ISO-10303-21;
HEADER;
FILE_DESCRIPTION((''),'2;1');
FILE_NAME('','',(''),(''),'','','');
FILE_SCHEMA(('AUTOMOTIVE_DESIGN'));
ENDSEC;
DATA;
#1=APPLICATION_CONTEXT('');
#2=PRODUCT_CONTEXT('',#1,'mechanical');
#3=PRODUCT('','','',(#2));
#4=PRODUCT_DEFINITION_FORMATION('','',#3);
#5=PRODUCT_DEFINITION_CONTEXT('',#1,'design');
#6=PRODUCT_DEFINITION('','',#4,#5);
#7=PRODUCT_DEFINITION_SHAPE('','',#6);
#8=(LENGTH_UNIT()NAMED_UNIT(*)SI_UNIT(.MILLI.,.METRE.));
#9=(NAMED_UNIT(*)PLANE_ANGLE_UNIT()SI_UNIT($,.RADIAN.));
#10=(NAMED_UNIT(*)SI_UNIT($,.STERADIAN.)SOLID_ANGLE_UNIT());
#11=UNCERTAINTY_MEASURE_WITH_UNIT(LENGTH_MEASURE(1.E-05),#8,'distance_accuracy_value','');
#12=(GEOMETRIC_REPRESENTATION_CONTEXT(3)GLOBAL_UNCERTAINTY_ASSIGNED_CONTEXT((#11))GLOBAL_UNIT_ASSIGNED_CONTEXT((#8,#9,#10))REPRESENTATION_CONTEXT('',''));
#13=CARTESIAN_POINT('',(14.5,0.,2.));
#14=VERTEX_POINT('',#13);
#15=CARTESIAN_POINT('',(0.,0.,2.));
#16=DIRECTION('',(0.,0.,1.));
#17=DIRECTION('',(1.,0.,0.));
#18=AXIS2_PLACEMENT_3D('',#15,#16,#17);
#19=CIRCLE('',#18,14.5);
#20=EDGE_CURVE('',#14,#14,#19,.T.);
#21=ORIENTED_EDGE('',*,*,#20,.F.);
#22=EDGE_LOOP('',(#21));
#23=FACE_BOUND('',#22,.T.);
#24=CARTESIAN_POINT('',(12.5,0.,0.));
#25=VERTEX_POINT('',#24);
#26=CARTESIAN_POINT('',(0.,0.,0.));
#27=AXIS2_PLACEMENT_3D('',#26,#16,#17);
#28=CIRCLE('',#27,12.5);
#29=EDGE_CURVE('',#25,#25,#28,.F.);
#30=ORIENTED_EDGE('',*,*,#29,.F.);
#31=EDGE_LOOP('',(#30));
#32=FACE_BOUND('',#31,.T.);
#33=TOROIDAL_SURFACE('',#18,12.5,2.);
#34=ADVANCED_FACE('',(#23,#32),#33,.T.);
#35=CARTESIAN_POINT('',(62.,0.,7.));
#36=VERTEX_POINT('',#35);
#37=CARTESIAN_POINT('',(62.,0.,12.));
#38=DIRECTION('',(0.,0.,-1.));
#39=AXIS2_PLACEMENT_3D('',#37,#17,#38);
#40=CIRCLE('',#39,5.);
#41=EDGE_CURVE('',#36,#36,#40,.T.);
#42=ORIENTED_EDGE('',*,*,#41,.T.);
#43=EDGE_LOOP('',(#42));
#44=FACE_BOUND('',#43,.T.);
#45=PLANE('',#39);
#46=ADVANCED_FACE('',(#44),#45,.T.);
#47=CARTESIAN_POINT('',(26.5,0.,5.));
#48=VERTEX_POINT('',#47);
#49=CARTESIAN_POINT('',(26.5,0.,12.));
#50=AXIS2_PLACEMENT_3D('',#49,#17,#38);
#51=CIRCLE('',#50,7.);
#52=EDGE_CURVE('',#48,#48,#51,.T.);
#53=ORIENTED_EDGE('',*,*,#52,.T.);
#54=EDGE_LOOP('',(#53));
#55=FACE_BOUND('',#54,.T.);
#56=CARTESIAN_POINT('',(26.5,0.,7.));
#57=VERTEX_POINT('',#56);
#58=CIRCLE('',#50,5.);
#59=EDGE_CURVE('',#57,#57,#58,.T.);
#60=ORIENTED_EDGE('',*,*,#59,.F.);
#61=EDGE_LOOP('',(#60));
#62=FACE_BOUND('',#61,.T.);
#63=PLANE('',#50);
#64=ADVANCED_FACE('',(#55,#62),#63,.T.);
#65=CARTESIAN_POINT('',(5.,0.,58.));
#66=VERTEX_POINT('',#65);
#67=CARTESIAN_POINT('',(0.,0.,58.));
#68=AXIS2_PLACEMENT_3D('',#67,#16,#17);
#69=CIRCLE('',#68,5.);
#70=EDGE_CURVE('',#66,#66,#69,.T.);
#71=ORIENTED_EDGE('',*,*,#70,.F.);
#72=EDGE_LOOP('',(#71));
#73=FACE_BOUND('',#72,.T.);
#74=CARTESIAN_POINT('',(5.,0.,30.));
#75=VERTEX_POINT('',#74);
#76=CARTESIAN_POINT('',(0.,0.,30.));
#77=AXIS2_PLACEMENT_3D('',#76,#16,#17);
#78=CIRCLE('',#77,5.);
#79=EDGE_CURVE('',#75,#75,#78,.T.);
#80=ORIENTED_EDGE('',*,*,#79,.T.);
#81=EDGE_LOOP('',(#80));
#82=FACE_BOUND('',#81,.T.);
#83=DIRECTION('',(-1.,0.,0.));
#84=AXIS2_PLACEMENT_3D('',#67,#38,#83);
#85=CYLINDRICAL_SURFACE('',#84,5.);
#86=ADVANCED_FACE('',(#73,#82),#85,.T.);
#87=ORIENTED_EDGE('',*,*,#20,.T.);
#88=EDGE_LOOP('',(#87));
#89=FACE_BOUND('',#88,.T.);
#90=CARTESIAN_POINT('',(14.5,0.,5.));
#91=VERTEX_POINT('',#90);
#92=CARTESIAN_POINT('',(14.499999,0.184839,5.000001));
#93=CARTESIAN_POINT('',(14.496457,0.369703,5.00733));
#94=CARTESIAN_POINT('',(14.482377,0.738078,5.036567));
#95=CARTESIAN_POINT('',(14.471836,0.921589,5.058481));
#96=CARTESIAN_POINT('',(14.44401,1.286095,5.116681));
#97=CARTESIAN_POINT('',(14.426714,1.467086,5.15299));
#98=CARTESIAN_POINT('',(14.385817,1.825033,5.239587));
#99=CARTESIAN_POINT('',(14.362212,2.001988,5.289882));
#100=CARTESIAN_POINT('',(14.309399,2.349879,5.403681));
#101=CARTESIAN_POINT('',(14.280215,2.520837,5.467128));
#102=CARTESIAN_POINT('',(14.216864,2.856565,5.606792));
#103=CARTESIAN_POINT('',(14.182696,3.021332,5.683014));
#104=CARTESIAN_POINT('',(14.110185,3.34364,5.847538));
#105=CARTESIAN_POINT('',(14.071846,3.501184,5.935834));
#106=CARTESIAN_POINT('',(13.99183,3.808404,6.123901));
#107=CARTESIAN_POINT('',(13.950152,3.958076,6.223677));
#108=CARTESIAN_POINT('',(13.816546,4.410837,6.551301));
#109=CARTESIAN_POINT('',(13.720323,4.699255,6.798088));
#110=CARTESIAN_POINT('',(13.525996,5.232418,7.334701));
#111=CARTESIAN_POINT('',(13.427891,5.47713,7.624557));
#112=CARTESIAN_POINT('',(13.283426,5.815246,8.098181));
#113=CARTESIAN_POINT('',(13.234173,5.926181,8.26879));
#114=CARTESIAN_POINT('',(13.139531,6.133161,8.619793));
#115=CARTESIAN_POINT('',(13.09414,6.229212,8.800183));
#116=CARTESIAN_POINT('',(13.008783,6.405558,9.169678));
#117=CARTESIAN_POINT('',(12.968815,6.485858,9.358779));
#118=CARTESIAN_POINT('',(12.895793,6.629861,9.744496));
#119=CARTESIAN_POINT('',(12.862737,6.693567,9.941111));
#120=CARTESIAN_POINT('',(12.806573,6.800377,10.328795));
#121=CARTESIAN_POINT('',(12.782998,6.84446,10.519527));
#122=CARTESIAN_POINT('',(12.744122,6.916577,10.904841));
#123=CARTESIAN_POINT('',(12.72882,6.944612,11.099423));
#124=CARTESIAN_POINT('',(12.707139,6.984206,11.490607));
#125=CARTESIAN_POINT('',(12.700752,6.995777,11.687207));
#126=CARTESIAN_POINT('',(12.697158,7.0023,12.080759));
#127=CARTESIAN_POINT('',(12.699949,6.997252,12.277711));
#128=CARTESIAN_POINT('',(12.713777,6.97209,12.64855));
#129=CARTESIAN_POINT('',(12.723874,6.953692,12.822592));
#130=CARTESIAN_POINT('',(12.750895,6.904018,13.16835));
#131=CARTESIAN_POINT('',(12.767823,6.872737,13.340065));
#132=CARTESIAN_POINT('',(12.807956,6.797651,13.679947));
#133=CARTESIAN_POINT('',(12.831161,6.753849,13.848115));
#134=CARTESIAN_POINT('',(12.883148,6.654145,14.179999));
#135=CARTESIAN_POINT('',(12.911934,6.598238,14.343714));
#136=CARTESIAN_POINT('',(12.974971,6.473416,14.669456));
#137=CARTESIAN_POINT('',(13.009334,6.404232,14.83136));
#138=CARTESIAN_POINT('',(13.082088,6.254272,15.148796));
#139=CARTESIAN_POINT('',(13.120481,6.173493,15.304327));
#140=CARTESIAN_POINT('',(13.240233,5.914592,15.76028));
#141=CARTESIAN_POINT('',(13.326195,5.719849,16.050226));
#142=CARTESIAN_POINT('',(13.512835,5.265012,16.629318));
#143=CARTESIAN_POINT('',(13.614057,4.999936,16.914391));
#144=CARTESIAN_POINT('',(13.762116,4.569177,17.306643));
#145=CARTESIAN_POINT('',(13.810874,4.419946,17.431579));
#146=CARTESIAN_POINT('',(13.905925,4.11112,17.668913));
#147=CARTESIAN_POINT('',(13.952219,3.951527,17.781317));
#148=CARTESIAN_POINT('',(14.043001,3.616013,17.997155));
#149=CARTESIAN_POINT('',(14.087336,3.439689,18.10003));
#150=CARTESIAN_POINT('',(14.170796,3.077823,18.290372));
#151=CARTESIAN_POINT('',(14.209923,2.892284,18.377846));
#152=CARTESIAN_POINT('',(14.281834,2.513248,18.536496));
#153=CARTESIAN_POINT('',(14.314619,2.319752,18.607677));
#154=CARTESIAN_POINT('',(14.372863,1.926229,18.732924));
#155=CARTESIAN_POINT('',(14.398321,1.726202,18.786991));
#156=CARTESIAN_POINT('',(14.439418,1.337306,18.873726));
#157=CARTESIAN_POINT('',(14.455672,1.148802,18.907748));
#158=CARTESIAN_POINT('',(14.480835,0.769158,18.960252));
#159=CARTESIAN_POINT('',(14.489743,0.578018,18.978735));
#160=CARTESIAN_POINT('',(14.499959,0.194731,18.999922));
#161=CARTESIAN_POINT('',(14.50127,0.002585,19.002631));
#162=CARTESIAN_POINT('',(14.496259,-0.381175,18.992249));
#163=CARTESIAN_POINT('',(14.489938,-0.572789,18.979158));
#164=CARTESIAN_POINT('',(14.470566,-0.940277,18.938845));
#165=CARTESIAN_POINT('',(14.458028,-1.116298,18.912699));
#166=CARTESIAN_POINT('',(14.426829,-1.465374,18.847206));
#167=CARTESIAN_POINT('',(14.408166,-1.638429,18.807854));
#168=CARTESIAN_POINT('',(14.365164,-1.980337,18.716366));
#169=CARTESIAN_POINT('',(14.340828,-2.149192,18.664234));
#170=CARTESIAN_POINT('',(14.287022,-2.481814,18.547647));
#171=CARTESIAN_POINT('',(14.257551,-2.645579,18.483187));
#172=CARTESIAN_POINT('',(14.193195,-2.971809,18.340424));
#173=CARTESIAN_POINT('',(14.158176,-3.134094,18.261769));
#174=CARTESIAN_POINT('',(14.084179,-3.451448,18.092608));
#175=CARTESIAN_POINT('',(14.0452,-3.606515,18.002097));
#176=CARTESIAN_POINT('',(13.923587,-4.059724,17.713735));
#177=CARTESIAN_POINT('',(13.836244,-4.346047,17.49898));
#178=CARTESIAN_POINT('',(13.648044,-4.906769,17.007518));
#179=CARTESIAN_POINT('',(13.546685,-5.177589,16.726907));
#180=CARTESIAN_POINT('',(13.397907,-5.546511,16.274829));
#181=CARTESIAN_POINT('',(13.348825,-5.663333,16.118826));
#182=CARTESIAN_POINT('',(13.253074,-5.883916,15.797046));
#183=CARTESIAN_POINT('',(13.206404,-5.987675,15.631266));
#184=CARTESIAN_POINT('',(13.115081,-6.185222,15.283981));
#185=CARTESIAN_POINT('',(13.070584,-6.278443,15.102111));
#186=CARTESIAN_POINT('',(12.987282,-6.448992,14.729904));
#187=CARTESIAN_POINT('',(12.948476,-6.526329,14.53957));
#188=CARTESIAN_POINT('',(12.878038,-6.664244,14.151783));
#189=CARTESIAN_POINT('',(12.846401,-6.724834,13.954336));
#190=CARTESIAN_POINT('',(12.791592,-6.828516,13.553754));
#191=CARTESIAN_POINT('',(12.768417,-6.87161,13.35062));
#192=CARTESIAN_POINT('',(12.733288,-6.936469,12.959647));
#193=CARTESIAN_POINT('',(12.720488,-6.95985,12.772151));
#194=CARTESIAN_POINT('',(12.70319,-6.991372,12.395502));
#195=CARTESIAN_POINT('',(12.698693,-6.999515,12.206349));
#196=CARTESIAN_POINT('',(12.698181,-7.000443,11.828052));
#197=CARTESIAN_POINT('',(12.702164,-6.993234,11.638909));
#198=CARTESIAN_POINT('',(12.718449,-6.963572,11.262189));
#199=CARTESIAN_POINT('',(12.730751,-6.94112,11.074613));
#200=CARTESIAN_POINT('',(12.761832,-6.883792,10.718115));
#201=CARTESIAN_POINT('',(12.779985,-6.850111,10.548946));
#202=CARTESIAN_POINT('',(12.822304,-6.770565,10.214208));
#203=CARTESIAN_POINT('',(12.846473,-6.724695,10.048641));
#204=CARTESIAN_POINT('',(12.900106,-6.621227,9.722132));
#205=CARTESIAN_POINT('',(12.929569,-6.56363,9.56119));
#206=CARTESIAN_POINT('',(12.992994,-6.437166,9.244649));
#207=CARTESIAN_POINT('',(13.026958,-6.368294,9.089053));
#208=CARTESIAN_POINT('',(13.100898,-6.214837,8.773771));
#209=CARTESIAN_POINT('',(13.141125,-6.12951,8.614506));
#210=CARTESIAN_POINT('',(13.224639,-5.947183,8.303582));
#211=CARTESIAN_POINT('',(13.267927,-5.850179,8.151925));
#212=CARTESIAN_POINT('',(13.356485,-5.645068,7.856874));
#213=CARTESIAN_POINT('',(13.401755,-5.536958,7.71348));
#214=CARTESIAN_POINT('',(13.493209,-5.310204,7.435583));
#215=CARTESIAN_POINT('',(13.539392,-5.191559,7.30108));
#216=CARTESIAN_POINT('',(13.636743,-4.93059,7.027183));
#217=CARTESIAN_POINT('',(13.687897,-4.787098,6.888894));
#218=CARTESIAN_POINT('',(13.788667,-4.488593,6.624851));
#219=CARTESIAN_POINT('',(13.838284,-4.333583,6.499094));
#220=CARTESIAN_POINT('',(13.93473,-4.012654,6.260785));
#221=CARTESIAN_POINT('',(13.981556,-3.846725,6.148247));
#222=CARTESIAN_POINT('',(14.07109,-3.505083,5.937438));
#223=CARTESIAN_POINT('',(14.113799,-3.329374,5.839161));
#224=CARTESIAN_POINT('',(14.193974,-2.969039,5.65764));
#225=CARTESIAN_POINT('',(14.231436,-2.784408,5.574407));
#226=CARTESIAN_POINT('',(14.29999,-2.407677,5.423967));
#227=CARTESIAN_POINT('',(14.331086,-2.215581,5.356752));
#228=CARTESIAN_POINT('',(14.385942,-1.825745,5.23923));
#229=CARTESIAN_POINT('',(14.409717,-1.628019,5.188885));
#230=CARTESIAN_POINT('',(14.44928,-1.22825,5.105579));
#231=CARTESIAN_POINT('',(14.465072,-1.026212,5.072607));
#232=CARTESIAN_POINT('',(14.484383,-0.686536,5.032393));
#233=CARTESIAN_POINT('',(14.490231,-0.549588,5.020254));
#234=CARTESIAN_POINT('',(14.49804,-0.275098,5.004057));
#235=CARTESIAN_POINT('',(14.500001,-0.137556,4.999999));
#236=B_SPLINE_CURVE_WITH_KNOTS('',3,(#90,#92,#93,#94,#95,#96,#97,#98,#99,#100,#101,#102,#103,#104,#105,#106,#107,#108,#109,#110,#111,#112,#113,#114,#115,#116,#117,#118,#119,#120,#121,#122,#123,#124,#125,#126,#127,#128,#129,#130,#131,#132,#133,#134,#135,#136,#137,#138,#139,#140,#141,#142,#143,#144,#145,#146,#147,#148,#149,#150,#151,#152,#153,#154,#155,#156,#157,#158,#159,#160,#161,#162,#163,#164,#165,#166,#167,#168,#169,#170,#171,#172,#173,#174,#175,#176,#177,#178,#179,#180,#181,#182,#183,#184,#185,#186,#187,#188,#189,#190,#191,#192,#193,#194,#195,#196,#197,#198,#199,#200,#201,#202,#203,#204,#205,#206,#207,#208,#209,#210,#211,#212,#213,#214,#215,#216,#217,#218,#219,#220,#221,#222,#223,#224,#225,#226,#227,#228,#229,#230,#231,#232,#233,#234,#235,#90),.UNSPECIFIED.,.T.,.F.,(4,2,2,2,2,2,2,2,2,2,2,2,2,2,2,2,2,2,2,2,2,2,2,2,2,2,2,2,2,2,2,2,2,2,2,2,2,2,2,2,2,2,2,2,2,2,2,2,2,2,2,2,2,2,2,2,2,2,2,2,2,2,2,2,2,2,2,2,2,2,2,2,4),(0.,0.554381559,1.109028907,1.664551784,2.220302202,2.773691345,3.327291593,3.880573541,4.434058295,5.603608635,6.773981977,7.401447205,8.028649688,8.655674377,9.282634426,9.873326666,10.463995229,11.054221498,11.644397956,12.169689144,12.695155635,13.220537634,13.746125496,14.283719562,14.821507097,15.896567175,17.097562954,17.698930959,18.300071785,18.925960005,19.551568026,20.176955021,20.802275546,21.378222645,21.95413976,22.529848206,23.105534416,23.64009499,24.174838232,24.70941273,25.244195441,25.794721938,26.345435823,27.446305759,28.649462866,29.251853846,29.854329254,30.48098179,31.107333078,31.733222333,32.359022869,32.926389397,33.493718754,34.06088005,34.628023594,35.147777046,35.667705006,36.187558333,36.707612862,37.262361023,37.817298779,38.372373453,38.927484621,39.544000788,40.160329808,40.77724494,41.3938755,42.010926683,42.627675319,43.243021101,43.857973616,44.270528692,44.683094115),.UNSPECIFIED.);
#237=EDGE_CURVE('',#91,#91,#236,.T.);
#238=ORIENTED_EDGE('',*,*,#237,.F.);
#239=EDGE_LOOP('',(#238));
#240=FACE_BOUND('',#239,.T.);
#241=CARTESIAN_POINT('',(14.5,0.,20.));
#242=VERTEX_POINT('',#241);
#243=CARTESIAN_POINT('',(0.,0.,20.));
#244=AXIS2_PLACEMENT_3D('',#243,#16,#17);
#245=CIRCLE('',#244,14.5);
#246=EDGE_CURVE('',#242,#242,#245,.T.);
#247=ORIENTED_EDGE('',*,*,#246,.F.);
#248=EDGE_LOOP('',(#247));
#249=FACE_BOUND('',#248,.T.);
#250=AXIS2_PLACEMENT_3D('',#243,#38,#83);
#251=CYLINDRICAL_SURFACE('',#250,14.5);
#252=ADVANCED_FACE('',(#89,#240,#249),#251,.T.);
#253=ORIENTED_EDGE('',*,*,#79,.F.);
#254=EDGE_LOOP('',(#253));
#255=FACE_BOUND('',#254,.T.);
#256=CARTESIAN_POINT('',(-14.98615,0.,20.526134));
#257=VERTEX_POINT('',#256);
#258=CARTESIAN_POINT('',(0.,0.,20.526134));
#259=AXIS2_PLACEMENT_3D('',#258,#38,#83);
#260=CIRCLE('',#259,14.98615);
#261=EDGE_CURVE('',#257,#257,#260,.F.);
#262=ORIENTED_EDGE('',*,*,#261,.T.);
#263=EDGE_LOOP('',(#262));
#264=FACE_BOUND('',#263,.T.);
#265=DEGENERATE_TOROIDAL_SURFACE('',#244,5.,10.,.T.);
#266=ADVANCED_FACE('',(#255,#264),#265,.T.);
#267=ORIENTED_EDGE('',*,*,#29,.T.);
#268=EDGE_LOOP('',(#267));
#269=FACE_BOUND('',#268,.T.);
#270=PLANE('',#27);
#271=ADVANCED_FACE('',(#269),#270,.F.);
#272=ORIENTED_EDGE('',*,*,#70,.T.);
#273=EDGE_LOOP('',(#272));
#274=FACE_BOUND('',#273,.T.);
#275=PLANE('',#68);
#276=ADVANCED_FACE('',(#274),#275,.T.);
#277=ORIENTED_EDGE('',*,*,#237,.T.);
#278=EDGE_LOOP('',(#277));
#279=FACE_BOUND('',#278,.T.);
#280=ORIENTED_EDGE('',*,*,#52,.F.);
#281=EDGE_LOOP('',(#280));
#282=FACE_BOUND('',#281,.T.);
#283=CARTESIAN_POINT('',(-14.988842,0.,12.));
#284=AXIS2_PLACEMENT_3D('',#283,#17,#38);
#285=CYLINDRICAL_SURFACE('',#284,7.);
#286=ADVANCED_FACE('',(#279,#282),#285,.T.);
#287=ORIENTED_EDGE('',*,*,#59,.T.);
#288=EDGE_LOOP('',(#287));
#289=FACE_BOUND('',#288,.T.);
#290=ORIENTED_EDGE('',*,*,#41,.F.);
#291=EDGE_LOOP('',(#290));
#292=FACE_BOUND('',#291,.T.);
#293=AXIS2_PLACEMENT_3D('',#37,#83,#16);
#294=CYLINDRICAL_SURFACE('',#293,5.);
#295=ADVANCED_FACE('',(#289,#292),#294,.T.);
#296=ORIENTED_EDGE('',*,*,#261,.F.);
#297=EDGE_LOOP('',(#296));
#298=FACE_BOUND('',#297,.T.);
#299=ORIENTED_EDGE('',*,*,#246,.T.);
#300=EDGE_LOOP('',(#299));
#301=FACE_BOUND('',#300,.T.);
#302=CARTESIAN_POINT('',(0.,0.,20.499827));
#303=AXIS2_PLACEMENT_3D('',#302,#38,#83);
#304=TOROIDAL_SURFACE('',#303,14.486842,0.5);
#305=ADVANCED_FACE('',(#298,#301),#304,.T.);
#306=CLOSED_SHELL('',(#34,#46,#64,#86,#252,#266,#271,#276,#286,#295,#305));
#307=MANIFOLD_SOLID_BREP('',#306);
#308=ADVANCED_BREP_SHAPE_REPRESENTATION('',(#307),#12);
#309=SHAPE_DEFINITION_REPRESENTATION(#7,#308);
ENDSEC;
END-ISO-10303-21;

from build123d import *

# Parameters (mm, degrees)
SZKIC1_R                         = 14.5
DODANIE_WYCI_GNI_CIE1_DEPTH      = 20
SZKIC2_R                         = 15
DODANIE_WYCI_GNI_CIE2_DEPTH      = 10
ZAOKR_GLENIE1_R                  = 10
SZKIC3_R                         = 5
DODANIE_WYCI_GNI_CIE3_DEPTH      = 28
ZAOKR_GLENIE2_R                  = 0.5
ZAOKR_GLENIE3_R                  = 2
DODANIE_WYCI_GNI_CIE4_REACH      = 74.868
DODANIE_WYCI_GNI_CIE4_END_RADIUS = 14.5
SZKIC4_R                         = 7
SZKIC5_R                         = 5
DODANIE_WYCI_GNI_CIE5_DEPTH      = 35.5


# Some blends are built 0.0001 mm under size
with BuildPart() as part:
    # Szkic1 → Dodanie-wyciągnięcie1 (new body)
    with BuildSketch(Plane.XY):
        Circle(SZKIC1_R)
    extrude(amount=DODANIE_WYCI_GNI_CIE1_DEPTH)

    # Szkic2 → Dodanie-wyciągnięcie2 (add)
    with BuildSketch(Plane.XY.offset(20)):
        Circle(SZKIC2_R)
    extrude(amount=DODANIE_WYCI_GNI_CIE2_DEPTH)

    # Zaokrąglenie1
    zaokr_glenie1_edges = [part.edges().sort_by_distance(p)[0] for p in [
        (-15, 0, 30),
    ]]
    fillet(zaokr_glenie1_edges, radius=ZAOKR_GLENIE1_R - 0.0001)  # a hair under: the kernel refuses the full size

    # Szkic3 → Dodanie-wyciągnięcie3 (add)
    with BuildSketch(Plane.XY.offset(30)):
        Circle(SZKIC3_R)
    extrude(amount=DODANIE_WYCI_GNI_CIE3_DEPTH)

    # Zaokrąglenie2
    # the kernel refuses this fillet: 0.5 mm, written as the material it takes off along each edge
    with BuildSketch(Plane(origin=(0, 0, 20), x_dir=(1, 0, 0), z_dir=(0, -1, 0))) as zaokr_glenie2_piece_1_section:
        with BuildLine():
            CenterArc((14.486838112, 0.5), ZAOKR_GLENIE2_R, 270, 93.01638914)
            Line((14.486838112, 0), (14.486838112, -0.05))
            Line((14.486838112, -0.05), (15, -0.05))
            Line((15, -0.05), (15.05, 0))
            ThreePointArc((15.05, 0), (15.05, 0.0001), (15.0360761, 0.528941884))
            Line((15.0360761, 0.528941884), (14.986145373, 0.526310803))
        make_face()
    zaokr_glenie2_piece_1 = revolve(axis=Axis((0, 0, 20), (0, 0, 1)), mode=Mode.PRIVATE)
    zaokr_glenie2_piece_1 = zaokr_glenie2_piece_1 - Plane(origin=(0, 0, 20.145882789), x_dir=(1, 0, 0), z_dir=(0, 0, -1)) * Cylinder(14.5, 61, mode=Mode.PRIVATE)
    add(zaokr_glenie2_piece_1, mode=Mode.SUBTRACT)

    # Zaokrąglenie3
    zaokr_glenie3_edges = [part.edges().sort_by_distance(p)[0] for p in [
        (-14.5, 0, 0),
    ]]
    fillet(zaokr_glenie3_edges, radius=ZAOKR_GLENIE3_R)

    # Dodanie-wyciągnięcie4: up to this cylinder (the profile starts outside it)
    dodanie_wyci_gni_cie4_end = Plane(origin=(0, 0, 12), z_dir=(0, 0, -1)) * Cylinder(DODANIE_WYCI_GNI_CIE4_END_RADIUS, 179.736, mode=Mode.PRIVATE)
    # Szkic4 → Dodanie-wyciągnięcie4 (add, up to the surface)
    with BuildSketch(Plane(origin=(26.5, 0, 0), x_dir=(0, 0, -1), z_dir=(1, 0, 0)), mode=Mode.PRIVATE) as dodanie_wyci_gni_cie4_sk1:
        with Locations((-12, 0)):
            Circle(SZKIC4_R)
    dodanie_wyci_gni_cie4_tool1 = extrude(dodanie_wyci_gni_cie4_sk1.sketch, amount=-DODANIE_WYCI_GNI_CIE4_REACH, mode=Mode.PRIVATE) - dodanie_wyci_gni_cie4_end
    add(dodanie_wyci_gni_cie4_tool1.solids().sort_by_distance((26.5, 0, 12))[0])

    # Szkic5 → Dodanie-wyciągnięcie5 (add)
    with BuildSketch(Plane(origin=(26.5, 0, 0), x_dir=(0, 0, -1), z_dir=(1, 0, 0))):
        with Locations((-12, 0)):
            Circle(SZKIC5_R)
    extrude(amount=DODANIE_WYCI_GNI_CIE5_DEPTH)


solid = part.part
